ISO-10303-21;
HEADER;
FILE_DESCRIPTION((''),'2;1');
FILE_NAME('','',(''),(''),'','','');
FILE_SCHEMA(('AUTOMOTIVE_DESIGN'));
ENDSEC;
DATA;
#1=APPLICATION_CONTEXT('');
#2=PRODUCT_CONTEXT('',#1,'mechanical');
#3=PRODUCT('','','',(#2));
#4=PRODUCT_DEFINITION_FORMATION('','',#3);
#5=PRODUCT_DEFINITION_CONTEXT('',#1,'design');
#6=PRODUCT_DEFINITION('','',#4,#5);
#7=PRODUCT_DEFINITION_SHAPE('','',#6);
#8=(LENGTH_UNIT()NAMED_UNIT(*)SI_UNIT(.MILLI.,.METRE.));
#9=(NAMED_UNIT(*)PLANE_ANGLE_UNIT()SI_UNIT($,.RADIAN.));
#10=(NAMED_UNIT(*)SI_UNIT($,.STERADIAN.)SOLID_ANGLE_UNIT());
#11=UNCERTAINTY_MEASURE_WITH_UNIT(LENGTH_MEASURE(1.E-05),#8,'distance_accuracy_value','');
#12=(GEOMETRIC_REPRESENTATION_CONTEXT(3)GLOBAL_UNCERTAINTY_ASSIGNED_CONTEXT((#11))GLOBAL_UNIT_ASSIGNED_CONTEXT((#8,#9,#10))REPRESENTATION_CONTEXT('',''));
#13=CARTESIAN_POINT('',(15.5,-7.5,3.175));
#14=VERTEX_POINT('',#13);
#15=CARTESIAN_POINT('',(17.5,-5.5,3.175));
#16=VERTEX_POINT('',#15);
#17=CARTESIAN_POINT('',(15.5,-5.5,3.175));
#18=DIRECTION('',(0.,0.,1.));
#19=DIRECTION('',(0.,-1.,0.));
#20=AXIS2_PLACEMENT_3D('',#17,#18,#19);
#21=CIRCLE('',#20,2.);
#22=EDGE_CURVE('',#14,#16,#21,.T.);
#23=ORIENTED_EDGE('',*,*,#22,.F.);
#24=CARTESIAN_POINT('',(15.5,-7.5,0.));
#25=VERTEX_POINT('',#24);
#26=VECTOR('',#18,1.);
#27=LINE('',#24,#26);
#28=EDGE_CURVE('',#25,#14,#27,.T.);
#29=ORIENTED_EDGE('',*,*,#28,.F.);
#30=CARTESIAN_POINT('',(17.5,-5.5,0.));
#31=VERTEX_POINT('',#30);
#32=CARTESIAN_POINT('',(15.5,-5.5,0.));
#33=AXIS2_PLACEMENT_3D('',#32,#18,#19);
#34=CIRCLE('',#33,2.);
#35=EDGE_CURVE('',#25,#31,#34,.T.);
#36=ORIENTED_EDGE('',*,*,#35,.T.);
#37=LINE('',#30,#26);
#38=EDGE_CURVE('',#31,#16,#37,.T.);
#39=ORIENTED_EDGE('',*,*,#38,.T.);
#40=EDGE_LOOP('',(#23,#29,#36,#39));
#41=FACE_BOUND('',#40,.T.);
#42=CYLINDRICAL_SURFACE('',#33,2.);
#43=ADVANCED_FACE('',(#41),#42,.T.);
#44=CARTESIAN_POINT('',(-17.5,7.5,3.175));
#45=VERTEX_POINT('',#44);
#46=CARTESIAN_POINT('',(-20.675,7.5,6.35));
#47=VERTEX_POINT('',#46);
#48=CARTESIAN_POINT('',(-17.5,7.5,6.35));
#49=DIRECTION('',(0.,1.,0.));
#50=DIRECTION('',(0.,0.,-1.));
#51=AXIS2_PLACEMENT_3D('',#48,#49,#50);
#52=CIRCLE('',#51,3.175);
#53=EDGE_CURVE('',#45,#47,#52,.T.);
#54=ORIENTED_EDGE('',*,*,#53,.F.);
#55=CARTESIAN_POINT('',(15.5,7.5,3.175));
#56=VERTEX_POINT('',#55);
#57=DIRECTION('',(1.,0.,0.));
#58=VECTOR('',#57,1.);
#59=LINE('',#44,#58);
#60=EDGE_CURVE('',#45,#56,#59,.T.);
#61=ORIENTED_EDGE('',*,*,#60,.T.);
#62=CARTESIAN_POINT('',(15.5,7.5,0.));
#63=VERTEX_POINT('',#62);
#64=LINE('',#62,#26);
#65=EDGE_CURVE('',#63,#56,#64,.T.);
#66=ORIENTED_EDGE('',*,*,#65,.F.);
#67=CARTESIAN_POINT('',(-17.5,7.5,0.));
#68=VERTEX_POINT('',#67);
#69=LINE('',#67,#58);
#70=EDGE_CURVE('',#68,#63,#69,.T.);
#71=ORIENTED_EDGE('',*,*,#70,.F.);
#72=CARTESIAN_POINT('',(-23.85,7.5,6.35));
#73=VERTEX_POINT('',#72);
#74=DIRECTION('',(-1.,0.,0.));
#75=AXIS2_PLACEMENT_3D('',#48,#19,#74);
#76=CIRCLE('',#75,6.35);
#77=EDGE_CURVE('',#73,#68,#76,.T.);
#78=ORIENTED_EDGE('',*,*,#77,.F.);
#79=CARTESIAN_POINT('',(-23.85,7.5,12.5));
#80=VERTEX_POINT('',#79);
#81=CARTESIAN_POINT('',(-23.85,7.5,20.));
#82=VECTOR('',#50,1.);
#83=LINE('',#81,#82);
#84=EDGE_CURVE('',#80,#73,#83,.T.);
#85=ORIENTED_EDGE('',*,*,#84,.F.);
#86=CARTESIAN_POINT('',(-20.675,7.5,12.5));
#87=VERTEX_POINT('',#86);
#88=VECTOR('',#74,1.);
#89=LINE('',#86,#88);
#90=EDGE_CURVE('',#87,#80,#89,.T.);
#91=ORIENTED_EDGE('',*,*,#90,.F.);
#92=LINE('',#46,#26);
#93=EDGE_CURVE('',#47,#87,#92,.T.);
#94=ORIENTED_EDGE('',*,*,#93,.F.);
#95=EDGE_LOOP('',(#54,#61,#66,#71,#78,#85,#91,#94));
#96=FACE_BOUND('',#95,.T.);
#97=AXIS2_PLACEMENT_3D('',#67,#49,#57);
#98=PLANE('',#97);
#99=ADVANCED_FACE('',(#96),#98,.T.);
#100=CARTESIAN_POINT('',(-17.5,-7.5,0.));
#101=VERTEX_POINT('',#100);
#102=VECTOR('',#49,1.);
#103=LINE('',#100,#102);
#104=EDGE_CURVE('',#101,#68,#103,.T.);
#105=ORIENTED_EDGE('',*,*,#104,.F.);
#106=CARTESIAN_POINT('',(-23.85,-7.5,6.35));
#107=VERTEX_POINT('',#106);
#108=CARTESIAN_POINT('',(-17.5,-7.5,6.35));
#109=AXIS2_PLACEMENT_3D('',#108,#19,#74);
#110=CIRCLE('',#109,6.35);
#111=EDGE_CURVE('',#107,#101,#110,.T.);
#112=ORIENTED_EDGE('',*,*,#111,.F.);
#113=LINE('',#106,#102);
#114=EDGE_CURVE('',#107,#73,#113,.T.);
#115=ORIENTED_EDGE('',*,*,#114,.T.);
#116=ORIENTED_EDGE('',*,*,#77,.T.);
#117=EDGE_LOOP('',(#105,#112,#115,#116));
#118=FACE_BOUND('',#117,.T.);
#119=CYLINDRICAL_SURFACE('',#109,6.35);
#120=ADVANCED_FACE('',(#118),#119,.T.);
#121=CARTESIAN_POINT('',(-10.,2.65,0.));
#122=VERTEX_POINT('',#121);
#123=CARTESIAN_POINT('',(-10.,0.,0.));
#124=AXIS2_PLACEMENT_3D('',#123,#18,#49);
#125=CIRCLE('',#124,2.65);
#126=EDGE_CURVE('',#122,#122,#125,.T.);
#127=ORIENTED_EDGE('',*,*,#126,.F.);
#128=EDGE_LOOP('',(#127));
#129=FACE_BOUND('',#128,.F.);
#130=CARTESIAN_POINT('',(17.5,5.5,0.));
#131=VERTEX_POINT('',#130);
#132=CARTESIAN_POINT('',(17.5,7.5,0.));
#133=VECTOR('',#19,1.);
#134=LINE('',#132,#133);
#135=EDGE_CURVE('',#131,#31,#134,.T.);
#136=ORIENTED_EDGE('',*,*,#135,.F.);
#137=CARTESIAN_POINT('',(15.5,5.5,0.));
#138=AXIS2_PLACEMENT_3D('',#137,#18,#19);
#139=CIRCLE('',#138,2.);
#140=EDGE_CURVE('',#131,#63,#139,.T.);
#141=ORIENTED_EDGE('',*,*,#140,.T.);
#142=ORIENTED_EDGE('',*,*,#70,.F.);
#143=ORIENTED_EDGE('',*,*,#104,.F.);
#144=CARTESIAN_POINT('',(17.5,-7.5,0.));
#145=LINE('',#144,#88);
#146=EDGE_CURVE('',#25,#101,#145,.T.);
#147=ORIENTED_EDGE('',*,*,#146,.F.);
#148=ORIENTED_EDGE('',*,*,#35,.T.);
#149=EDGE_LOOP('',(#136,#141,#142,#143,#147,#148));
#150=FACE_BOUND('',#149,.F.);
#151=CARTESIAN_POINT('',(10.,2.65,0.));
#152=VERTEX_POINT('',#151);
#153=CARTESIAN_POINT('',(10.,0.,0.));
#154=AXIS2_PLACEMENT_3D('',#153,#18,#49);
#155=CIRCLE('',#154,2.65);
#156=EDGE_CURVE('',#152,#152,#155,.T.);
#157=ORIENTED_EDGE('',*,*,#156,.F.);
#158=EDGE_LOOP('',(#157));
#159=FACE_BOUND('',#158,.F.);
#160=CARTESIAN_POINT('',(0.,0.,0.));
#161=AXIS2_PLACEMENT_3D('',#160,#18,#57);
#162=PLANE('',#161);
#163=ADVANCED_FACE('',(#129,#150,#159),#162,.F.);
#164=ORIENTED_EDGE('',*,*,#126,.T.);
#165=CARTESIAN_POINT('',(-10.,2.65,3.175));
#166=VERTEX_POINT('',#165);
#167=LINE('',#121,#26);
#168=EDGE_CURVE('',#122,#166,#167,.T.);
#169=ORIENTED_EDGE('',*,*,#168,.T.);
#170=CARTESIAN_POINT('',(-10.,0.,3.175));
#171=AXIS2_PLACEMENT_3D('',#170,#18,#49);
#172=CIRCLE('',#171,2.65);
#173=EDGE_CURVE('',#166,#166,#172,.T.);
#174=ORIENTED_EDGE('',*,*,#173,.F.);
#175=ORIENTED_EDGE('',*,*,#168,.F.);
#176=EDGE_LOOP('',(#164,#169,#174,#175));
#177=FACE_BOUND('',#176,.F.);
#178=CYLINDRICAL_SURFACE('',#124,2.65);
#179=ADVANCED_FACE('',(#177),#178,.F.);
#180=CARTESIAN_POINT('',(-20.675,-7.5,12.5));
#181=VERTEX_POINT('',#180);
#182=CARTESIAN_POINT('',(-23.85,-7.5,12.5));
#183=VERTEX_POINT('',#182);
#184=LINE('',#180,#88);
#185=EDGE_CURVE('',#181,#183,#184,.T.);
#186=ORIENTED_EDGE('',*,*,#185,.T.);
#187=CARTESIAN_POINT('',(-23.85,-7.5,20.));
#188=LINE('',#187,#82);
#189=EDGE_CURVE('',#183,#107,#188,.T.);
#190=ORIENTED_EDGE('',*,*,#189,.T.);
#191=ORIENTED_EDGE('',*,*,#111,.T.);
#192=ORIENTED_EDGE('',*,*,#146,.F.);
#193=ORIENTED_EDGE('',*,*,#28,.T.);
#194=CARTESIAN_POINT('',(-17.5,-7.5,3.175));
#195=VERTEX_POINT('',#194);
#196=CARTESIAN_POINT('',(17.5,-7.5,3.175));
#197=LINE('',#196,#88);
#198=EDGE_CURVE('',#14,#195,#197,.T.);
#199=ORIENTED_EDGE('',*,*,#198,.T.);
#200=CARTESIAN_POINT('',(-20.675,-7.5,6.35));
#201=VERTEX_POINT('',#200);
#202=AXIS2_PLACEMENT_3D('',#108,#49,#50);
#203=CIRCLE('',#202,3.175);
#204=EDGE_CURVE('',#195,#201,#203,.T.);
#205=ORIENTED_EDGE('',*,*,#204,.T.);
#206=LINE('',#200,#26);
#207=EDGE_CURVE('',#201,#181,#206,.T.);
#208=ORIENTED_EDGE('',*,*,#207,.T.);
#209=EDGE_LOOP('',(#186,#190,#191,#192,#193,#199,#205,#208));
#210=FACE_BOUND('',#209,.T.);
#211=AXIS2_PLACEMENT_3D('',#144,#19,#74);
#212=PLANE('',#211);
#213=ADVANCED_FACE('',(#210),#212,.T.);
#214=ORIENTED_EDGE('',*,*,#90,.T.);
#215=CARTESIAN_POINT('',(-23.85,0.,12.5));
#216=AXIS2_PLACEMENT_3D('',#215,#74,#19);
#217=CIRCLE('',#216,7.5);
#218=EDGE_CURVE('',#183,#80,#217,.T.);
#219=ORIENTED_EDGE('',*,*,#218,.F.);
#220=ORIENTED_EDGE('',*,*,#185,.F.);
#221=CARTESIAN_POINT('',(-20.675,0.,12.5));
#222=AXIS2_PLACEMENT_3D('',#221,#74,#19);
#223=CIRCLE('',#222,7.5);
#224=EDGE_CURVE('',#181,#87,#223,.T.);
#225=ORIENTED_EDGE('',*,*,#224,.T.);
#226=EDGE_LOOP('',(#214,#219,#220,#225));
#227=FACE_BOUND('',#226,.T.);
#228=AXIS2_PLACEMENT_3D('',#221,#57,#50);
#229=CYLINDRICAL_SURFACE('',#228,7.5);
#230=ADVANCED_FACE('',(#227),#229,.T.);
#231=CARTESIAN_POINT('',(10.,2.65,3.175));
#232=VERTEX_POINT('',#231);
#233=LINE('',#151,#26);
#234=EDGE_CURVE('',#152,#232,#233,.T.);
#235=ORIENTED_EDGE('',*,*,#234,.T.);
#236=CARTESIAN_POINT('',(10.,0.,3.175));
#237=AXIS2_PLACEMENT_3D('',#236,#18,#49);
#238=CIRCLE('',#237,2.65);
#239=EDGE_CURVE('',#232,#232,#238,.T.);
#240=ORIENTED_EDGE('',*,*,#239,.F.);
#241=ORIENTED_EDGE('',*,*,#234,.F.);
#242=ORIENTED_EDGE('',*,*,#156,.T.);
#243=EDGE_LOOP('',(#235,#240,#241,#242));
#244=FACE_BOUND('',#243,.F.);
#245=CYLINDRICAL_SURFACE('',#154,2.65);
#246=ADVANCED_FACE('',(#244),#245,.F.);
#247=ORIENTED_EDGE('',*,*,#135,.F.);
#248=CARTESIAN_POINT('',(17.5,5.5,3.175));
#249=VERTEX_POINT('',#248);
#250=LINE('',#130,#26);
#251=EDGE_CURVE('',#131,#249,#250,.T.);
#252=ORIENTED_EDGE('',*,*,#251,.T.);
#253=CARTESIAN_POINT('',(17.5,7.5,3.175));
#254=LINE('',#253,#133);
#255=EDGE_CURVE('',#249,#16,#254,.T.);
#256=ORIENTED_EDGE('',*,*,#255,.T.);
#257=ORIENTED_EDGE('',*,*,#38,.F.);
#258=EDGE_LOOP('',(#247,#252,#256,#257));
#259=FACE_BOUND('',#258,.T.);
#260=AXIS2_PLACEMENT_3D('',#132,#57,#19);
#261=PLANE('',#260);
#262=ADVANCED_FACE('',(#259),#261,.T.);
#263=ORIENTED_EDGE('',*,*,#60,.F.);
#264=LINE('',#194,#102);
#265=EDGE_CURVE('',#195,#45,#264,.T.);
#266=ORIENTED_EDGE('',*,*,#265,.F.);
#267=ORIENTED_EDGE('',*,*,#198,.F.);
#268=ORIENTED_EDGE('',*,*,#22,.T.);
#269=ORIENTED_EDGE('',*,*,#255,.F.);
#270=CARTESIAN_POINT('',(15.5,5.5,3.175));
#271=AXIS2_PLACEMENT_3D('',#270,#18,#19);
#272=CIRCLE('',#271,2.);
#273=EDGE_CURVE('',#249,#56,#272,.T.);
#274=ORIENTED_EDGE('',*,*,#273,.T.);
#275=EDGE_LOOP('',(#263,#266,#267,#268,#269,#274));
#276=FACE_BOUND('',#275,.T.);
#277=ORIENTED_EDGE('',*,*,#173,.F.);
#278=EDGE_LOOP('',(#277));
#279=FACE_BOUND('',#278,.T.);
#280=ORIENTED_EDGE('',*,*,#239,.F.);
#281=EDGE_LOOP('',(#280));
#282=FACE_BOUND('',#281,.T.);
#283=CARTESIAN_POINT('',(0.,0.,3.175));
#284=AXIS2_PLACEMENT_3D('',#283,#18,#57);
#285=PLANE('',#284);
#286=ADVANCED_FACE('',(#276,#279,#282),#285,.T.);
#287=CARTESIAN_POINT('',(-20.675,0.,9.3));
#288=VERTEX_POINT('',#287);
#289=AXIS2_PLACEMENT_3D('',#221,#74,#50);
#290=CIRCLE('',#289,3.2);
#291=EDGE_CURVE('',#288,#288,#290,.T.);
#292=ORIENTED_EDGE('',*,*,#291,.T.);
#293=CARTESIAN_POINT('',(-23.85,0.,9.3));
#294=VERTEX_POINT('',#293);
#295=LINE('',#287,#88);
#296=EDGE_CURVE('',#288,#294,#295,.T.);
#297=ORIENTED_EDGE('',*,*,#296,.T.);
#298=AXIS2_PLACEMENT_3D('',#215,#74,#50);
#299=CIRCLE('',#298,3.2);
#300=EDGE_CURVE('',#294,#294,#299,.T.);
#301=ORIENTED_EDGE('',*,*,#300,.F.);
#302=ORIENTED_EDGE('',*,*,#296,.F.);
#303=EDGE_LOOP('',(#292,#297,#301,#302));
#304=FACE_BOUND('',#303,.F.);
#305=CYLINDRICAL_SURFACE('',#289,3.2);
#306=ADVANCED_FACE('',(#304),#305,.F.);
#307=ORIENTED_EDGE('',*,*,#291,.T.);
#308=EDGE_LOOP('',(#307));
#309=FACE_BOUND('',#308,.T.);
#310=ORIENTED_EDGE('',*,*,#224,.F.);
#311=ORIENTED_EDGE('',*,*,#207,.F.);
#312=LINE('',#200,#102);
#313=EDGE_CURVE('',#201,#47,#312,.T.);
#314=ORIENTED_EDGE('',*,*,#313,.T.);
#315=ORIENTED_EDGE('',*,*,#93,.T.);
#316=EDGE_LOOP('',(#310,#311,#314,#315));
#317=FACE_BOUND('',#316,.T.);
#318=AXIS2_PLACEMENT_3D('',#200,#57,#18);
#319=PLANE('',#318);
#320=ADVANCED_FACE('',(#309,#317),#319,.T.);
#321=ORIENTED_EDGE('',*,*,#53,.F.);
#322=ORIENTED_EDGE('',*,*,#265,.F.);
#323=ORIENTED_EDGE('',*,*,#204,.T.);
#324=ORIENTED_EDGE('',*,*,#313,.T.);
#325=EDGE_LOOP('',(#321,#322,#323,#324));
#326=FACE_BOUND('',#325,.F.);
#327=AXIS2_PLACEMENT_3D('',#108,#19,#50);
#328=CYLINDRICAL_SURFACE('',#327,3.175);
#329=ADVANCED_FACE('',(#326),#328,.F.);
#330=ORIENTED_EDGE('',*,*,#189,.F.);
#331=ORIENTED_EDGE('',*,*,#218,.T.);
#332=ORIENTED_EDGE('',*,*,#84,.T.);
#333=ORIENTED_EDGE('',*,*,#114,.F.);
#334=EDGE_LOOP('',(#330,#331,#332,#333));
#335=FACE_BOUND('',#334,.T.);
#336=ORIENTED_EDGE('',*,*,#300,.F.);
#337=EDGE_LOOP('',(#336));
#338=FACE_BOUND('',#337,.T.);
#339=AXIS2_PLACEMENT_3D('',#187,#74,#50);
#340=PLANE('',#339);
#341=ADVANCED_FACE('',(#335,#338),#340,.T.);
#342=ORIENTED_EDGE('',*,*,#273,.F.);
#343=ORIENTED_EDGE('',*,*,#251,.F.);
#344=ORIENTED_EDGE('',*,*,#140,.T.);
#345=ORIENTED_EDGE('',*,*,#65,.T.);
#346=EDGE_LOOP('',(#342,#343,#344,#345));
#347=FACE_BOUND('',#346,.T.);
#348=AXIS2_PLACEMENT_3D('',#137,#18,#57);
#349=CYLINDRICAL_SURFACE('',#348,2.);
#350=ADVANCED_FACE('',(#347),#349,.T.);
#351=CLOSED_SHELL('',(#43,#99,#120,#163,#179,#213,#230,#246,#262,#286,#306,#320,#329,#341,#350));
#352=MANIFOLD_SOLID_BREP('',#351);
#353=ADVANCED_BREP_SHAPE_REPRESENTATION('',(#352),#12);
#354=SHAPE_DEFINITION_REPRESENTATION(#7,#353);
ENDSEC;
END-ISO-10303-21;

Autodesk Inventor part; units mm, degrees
ref_plane "YZ Plane" through (0, 0, 0) normal (1, 0, 0) x (0, 1, 0)
ref_plane "XZ Plane" through (0, 0, 0) normal (0, 1, 0) x (-1, 0, 0)
ref_plane "XY Plane" through (0, 0, 0) normal (0, 0, 1) x (1, 0, 0)
sketch "Sketch1" plane through (0, 0, 0) normal (0, 0, 1) x (1, 0, 0)
  line L0 (17.5, -7.5) -> (-17.5, -7.5)
  line L1 (-17.5, -7.5) -> (-17.5, 7.5)
  line L2 (-17.5, 7.5) -> (17.5, 7.5)
  line L3 (17.5, 7.5) -> (17.5, -7.5)
  line L4 (17.5, -7.5) -> (-17.5, 7.5) construction
  line L5 (-17.5, -7.5) -> (17.5, 7.5) construction
  line L6 (-10, 0) -> (10, 0) construction
  point P0 (0, 0)
  dimension "d0" = 35
  dimension "d1" = 15
  dimension "d2" = 20
  dimension "d3" = 7.5
extrude "Plate1" add sketch "Sketch1" along normal blind 3.175
sketch "Sketch2" plane through (-20.675, -7.5, 6.35) normal (-1, 0, 0) x (0, -1, 0)
  line L0 (-15, 0) -> (0, 0)
  line L1 (0, 0) -> (0, 13.65)
  line L2 (0, 13.65) -> (-15, 13.65)
  line L3 (-15, 13.65) -> (-15, 0)
edge flange "Flange1" height 20 angle 90 thickness 3.175 bend radius 3.175 thickness toward (-1, 0, 0) relief tear relief width 3.175 relief depth 1.5875 edges at (-17.5, 0, 3.175) wall of the first edge with corners at (-20.675, 7.5, 6.35) (-20.675, -7.5, 6.35) (-20.675, -7.5, 20) (-20.675, 7.5, 20)
bend "Bend1"
corner "Corner1"
hole "Hole1" at (-10, 0, 0) at (10, 0, 0) direction (0, 0, 1) diameter 5.3 end through all
sketch "Sketch3" plane through (-20.675, -7.5, 20) normal (1, 0, 0) x (0, 0, -1)
  line L0 (13.65, 0) -> (13.65, 15) projected
  line L1 (0, 15) -> (13.65, 15) projected
  line L2 (0, 15) -> (0, 0) projected
  line L3 (0, 0) -> (13.65, 0) projected
  circle A0 centre (7.5, 7.5) radius 7.5
  point P0 (20, 7.5)
  point P1 (0, 7.5)
  point P2 (7.5, 15)
  point P3 (7.5, 0)
hole "Hole2" at (-20.675, 0, 12.5) direction (-1, 0, 0) diameter 6.4 end through all
extrude "Extrusion1" cut sketch "Sketch3" against normal through all contours L3 L2 A0 | L2 L1 A0
fillet "Fillet1" radius 2 2 edges at (17.5, 7.5, 1.5875) (17.5, -7.5, 1.5875)
equation "\"d0\" = d2 + d1"
equation "\"d3\" = 0.5 * d1"
equation "\"d20\" = Thickness"
equation "\"d4\" = Thickness"
equation "\"d5\" = BendReliefWidth"
equation "\"d6\" = BendReliefDepth"
equation "\"d7\" = MinimumRemnant"
equation "\"d8\" = TransitionRadius"
equation "\"d11\" = BendRadius"
equation "\"d12\" = CornerReliefSize"
equation "\"d13\" = GapSize"
equation "\"d14\" = JacobiRadiusSize"
equation "\"BendReliefWidth\" = Thickness"
equation "\"BendReliefDepth\" = 0.5 * Thickness"
equation "\"CornerReliefSize\" = 4 * Thickness"
equation "\"MinimumRemnant\" = 2 * Thickness"
equation "\"TransitionRadius\" = BendRadius"
equation "\"JacobiRadiusSize\" = BendRadius"
equation "\"GapSize\" = Thickness"
equation "\"Thickness\" = 3.175"
equation "\"BendRadius\" = 3.175"
properties part number "Inductive Sensor Bracket" material "Aluminum 6061"
